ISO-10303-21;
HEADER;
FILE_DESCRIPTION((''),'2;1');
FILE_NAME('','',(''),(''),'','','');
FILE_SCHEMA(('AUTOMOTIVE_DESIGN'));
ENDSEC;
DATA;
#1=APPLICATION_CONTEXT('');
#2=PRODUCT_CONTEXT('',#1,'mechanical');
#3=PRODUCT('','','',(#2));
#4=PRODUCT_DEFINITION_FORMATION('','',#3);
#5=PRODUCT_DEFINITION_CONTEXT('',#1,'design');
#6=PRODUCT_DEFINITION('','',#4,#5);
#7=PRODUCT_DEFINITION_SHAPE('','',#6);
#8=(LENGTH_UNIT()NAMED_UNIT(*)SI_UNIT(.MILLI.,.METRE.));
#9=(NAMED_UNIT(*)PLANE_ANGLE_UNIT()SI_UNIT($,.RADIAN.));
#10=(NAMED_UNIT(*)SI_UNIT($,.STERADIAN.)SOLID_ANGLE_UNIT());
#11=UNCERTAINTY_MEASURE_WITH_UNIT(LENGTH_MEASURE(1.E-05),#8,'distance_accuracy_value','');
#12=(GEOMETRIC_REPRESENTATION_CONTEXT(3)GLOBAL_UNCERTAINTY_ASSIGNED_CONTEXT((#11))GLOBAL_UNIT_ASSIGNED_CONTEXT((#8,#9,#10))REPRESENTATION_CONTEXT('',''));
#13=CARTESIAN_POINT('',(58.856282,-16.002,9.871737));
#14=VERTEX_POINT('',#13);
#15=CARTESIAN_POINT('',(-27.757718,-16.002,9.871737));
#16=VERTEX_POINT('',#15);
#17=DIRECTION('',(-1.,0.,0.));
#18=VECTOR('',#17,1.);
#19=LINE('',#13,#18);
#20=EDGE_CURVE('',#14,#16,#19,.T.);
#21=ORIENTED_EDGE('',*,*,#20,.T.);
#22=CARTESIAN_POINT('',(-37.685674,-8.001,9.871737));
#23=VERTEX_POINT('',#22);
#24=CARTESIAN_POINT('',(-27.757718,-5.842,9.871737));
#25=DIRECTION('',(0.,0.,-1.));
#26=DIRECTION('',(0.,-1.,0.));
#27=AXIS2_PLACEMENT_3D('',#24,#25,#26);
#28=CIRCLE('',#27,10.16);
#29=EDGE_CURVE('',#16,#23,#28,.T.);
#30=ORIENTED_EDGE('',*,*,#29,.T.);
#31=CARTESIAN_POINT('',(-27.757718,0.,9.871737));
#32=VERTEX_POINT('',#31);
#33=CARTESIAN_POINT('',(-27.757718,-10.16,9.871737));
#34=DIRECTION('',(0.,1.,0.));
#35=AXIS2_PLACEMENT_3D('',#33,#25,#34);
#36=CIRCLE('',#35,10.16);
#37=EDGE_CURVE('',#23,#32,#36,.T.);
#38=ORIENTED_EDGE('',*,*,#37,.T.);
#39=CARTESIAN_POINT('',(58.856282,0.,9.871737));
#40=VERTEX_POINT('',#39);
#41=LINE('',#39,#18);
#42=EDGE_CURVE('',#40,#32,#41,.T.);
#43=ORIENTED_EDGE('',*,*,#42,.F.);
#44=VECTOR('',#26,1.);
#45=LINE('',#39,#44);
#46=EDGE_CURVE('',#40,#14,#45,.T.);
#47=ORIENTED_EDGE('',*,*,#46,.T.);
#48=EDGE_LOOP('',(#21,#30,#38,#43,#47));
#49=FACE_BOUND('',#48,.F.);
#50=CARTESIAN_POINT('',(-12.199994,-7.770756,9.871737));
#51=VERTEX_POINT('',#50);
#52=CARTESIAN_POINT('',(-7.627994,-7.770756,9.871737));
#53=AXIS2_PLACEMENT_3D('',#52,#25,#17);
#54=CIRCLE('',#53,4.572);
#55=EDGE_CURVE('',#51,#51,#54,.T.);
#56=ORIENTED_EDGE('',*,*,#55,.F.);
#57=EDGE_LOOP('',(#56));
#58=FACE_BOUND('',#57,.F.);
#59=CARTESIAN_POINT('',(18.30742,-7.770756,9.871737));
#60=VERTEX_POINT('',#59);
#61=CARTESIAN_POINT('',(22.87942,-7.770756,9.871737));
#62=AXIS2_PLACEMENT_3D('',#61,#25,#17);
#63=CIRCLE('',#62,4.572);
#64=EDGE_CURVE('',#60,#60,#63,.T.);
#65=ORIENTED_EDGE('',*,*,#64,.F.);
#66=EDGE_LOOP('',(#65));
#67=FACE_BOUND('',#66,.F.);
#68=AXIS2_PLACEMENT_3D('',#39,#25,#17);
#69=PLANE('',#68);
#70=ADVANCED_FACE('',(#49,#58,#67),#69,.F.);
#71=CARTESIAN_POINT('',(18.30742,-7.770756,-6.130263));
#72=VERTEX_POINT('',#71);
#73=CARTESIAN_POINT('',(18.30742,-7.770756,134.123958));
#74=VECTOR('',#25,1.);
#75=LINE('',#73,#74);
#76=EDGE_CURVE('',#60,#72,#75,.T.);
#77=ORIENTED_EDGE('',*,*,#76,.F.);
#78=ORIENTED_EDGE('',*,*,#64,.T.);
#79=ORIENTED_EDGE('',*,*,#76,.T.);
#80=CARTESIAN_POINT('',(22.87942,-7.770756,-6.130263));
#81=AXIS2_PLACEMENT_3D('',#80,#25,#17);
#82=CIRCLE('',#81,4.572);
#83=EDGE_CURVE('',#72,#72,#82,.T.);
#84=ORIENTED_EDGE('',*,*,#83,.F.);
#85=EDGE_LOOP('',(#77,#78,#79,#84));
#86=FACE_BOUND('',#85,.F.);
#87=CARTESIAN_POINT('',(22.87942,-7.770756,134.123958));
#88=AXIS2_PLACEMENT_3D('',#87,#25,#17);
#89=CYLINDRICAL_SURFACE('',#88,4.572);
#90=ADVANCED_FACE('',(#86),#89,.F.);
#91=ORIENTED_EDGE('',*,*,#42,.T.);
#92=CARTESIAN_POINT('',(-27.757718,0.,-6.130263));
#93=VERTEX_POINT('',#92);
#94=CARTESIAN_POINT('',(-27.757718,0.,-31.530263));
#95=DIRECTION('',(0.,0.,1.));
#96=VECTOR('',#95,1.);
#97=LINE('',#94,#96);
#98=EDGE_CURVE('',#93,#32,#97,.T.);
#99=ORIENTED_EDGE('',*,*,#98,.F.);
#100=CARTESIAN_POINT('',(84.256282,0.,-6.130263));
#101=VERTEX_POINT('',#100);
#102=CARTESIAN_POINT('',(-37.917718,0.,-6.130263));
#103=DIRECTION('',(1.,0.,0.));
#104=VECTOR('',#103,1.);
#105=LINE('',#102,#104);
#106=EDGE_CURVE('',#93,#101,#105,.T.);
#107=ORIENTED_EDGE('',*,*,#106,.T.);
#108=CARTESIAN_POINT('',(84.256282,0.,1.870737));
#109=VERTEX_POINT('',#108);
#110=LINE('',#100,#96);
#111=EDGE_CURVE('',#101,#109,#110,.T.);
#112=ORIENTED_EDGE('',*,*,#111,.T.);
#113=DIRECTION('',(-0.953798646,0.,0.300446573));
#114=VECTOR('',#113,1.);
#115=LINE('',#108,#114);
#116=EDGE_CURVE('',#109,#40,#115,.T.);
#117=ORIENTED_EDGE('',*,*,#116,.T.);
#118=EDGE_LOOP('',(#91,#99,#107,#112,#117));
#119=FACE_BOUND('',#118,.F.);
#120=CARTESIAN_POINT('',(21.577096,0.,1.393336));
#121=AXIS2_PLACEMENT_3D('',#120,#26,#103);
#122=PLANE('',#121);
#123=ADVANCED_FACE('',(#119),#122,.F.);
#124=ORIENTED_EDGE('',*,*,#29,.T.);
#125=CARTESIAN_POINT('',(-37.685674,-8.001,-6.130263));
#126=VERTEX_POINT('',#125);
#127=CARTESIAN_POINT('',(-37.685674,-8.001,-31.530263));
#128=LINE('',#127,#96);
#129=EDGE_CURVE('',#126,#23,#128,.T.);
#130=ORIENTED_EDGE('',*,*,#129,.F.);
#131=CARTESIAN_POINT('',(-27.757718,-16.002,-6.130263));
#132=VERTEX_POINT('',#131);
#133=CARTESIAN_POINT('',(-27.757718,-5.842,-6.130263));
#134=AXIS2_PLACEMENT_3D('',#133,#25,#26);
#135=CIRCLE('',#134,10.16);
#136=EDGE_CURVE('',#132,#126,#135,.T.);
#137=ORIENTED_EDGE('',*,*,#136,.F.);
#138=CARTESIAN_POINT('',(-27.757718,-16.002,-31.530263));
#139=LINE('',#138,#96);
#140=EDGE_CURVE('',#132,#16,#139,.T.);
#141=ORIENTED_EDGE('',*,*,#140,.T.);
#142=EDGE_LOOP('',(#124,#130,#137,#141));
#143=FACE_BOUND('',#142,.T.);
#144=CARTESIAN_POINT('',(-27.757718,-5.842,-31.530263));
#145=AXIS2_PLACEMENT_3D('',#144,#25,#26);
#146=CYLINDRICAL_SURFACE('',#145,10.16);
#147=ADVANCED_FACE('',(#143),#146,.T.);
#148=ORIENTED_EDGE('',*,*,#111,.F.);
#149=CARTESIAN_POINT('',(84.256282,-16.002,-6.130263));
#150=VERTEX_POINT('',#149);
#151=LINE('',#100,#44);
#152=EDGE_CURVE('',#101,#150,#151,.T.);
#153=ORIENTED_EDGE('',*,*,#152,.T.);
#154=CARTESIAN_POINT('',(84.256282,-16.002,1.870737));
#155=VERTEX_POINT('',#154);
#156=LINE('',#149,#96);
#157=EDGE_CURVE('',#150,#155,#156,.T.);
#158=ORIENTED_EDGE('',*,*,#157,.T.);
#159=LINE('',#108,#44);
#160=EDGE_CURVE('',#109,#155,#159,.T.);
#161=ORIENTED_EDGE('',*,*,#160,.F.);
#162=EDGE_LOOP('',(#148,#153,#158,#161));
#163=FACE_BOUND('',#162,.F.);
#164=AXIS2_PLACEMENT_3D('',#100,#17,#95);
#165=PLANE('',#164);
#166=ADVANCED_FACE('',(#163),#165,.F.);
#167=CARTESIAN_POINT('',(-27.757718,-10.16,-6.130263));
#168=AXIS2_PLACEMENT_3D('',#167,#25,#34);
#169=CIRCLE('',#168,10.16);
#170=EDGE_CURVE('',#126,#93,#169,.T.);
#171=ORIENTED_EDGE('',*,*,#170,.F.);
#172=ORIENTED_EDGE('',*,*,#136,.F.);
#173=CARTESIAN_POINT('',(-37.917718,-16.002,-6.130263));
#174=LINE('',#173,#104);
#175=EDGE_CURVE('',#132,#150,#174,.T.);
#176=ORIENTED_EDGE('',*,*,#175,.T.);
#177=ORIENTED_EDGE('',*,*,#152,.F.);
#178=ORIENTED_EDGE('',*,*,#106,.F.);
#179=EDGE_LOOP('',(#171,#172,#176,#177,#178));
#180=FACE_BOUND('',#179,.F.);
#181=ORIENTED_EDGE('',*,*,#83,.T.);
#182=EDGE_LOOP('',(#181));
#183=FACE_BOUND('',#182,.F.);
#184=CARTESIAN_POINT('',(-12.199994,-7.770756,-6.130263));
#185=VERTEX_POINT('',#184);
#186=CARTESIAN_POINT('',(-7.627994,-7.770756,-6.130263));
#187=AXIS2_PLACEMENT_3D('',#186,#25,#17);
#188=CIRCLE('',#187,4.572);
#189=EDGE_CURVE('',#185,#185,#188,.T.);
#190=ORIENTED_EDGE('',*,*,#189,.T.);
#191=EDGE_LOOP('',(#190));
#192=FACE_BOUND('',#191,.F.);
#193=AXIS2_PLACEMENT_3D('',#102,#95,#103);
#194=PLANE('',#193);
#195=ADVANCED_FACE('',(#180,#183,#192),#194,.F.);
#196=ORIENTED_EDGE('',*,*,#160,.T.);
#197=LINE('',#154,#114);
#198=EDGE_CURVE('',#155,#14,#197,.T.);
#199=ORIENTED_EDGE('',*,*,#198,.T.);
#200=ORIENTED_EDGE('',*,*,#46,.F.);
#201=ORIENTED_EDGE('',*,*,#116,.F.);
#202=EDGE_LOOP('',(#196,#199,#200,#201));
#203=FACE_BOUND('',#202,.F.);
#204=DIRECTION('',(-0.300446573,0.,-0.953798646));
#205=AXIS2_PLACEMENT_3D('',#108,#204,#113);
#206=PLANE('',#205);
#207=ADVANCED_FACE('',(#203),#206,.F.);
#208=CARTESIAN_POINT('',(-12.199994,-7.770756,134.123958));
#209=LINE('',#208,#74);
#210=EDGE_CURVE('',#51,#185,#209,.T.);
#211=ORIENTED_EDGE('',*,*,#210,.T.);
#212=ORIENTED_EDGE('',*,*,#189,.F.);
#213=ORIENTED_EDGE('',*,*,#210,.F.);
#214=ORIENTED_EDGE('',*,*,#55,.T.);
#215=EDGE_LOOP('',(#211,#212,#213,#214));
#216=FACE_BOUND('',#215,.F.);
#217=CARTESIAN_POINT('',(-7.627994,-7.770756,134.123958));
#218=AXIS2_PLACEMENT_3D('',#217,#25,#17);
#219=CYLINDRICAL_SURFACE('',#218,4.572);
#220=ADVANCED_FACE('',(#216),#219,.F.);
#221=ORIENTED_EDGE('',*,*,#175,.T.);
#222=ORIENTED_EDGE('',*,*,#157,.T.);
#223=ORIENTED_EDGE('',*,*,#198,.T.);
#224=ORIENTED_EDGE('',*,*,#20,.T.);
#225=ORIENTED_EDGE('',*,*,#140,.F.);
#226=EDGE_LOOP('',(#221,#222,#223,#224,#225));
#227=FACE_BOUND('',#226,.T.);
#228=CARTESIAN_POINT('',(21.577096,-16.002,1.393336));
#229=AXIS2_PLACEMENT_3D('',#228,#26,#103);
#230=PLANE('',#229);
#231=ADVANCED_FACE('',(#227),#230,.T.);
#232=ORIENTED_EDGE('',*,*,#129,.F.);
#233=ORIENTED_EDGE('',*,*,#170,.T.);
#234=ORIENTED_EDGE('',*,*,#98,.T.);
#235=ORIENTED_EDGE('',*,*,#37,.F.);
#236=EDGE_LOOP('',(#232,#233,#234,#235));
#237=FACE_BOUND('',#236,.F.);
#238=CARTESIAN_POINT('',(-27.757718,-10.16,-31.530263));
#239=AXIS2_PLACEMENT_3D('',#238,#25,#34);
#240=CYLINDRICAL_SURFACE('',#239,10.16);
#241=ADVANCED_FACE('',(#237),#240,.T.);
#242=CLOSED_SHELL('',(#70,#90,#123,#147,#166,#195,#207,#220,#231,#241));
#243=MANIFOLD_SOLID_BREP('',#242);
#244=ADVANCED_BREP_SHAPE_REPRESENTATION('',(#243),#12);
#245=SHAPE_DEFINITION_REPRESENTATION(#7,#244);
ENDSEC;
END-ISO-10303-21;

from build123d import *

# Parameters (mm, degrees)
F1_DEPTH    = 16.002
F3_D        = 9.144
F4_T1_DEPTH = 66.802


# Not quite as in the source:
# - a fillet or chamfer that OpenCascade refuses, or shapes differently, is made with other operations: its cross-section is extruded or revolved along the edge and cut away or added


with BuildPart() as f1:
    # F0 (on Front) → F1 (new body)
    with BuildSketch(Plane.XZ):
        Polygon((58.8562823832, 9.8717374111), (-37.9177176168, 9.8717374111), (-37.9177176168, -6.1302625889), (84.2562823832, -6.1302625889), (84.2562823832, 1.8707374111), align=None)
    extrude(amount=F1_DEPTH)

    # F3 (through all)
    with Locations(Plane.XY.offset(9.8717374111)):
        with Locations((-7.6279942878, -7.7707557939), (22.8794198483, -7.7707557939)):
            Hole(F3_D / 2)

    # F4: fillet of radius 10.16 on 2 edges, made by hand

    # F4_s2 → F4_t1 (cut)
    with BuildSketch(Plane.XY.offset(-31.5302625889)):
        with BuildLine():
            ThreePointArc((-27.7577176168, -16.002), (-34.9419225137, -13.0262048969), (-37.9177176168, -5.842))
            Line((-37.9177176168, -5.842), (-37.9177176168, -16.002))
            Line((-37.9177176168, -16.002), (-27.7577176168, -16.002))
        make_face()
        with BuildLine():
            ThreePointArc((-27.7577176168, 0), (-34.9419225137, -2.9757951031), (-37.9177176168, -10.16))
            Line((-37.9177176168, -10.16), (-37.9177176168, 0))
            Line((-37.9177176168, 0), (-27.7577176168, 0))
        make_face()
    extrude(amount=F4_T1_DEPTH, mode=Mode.SUBTRACT)


solid = f1.part
